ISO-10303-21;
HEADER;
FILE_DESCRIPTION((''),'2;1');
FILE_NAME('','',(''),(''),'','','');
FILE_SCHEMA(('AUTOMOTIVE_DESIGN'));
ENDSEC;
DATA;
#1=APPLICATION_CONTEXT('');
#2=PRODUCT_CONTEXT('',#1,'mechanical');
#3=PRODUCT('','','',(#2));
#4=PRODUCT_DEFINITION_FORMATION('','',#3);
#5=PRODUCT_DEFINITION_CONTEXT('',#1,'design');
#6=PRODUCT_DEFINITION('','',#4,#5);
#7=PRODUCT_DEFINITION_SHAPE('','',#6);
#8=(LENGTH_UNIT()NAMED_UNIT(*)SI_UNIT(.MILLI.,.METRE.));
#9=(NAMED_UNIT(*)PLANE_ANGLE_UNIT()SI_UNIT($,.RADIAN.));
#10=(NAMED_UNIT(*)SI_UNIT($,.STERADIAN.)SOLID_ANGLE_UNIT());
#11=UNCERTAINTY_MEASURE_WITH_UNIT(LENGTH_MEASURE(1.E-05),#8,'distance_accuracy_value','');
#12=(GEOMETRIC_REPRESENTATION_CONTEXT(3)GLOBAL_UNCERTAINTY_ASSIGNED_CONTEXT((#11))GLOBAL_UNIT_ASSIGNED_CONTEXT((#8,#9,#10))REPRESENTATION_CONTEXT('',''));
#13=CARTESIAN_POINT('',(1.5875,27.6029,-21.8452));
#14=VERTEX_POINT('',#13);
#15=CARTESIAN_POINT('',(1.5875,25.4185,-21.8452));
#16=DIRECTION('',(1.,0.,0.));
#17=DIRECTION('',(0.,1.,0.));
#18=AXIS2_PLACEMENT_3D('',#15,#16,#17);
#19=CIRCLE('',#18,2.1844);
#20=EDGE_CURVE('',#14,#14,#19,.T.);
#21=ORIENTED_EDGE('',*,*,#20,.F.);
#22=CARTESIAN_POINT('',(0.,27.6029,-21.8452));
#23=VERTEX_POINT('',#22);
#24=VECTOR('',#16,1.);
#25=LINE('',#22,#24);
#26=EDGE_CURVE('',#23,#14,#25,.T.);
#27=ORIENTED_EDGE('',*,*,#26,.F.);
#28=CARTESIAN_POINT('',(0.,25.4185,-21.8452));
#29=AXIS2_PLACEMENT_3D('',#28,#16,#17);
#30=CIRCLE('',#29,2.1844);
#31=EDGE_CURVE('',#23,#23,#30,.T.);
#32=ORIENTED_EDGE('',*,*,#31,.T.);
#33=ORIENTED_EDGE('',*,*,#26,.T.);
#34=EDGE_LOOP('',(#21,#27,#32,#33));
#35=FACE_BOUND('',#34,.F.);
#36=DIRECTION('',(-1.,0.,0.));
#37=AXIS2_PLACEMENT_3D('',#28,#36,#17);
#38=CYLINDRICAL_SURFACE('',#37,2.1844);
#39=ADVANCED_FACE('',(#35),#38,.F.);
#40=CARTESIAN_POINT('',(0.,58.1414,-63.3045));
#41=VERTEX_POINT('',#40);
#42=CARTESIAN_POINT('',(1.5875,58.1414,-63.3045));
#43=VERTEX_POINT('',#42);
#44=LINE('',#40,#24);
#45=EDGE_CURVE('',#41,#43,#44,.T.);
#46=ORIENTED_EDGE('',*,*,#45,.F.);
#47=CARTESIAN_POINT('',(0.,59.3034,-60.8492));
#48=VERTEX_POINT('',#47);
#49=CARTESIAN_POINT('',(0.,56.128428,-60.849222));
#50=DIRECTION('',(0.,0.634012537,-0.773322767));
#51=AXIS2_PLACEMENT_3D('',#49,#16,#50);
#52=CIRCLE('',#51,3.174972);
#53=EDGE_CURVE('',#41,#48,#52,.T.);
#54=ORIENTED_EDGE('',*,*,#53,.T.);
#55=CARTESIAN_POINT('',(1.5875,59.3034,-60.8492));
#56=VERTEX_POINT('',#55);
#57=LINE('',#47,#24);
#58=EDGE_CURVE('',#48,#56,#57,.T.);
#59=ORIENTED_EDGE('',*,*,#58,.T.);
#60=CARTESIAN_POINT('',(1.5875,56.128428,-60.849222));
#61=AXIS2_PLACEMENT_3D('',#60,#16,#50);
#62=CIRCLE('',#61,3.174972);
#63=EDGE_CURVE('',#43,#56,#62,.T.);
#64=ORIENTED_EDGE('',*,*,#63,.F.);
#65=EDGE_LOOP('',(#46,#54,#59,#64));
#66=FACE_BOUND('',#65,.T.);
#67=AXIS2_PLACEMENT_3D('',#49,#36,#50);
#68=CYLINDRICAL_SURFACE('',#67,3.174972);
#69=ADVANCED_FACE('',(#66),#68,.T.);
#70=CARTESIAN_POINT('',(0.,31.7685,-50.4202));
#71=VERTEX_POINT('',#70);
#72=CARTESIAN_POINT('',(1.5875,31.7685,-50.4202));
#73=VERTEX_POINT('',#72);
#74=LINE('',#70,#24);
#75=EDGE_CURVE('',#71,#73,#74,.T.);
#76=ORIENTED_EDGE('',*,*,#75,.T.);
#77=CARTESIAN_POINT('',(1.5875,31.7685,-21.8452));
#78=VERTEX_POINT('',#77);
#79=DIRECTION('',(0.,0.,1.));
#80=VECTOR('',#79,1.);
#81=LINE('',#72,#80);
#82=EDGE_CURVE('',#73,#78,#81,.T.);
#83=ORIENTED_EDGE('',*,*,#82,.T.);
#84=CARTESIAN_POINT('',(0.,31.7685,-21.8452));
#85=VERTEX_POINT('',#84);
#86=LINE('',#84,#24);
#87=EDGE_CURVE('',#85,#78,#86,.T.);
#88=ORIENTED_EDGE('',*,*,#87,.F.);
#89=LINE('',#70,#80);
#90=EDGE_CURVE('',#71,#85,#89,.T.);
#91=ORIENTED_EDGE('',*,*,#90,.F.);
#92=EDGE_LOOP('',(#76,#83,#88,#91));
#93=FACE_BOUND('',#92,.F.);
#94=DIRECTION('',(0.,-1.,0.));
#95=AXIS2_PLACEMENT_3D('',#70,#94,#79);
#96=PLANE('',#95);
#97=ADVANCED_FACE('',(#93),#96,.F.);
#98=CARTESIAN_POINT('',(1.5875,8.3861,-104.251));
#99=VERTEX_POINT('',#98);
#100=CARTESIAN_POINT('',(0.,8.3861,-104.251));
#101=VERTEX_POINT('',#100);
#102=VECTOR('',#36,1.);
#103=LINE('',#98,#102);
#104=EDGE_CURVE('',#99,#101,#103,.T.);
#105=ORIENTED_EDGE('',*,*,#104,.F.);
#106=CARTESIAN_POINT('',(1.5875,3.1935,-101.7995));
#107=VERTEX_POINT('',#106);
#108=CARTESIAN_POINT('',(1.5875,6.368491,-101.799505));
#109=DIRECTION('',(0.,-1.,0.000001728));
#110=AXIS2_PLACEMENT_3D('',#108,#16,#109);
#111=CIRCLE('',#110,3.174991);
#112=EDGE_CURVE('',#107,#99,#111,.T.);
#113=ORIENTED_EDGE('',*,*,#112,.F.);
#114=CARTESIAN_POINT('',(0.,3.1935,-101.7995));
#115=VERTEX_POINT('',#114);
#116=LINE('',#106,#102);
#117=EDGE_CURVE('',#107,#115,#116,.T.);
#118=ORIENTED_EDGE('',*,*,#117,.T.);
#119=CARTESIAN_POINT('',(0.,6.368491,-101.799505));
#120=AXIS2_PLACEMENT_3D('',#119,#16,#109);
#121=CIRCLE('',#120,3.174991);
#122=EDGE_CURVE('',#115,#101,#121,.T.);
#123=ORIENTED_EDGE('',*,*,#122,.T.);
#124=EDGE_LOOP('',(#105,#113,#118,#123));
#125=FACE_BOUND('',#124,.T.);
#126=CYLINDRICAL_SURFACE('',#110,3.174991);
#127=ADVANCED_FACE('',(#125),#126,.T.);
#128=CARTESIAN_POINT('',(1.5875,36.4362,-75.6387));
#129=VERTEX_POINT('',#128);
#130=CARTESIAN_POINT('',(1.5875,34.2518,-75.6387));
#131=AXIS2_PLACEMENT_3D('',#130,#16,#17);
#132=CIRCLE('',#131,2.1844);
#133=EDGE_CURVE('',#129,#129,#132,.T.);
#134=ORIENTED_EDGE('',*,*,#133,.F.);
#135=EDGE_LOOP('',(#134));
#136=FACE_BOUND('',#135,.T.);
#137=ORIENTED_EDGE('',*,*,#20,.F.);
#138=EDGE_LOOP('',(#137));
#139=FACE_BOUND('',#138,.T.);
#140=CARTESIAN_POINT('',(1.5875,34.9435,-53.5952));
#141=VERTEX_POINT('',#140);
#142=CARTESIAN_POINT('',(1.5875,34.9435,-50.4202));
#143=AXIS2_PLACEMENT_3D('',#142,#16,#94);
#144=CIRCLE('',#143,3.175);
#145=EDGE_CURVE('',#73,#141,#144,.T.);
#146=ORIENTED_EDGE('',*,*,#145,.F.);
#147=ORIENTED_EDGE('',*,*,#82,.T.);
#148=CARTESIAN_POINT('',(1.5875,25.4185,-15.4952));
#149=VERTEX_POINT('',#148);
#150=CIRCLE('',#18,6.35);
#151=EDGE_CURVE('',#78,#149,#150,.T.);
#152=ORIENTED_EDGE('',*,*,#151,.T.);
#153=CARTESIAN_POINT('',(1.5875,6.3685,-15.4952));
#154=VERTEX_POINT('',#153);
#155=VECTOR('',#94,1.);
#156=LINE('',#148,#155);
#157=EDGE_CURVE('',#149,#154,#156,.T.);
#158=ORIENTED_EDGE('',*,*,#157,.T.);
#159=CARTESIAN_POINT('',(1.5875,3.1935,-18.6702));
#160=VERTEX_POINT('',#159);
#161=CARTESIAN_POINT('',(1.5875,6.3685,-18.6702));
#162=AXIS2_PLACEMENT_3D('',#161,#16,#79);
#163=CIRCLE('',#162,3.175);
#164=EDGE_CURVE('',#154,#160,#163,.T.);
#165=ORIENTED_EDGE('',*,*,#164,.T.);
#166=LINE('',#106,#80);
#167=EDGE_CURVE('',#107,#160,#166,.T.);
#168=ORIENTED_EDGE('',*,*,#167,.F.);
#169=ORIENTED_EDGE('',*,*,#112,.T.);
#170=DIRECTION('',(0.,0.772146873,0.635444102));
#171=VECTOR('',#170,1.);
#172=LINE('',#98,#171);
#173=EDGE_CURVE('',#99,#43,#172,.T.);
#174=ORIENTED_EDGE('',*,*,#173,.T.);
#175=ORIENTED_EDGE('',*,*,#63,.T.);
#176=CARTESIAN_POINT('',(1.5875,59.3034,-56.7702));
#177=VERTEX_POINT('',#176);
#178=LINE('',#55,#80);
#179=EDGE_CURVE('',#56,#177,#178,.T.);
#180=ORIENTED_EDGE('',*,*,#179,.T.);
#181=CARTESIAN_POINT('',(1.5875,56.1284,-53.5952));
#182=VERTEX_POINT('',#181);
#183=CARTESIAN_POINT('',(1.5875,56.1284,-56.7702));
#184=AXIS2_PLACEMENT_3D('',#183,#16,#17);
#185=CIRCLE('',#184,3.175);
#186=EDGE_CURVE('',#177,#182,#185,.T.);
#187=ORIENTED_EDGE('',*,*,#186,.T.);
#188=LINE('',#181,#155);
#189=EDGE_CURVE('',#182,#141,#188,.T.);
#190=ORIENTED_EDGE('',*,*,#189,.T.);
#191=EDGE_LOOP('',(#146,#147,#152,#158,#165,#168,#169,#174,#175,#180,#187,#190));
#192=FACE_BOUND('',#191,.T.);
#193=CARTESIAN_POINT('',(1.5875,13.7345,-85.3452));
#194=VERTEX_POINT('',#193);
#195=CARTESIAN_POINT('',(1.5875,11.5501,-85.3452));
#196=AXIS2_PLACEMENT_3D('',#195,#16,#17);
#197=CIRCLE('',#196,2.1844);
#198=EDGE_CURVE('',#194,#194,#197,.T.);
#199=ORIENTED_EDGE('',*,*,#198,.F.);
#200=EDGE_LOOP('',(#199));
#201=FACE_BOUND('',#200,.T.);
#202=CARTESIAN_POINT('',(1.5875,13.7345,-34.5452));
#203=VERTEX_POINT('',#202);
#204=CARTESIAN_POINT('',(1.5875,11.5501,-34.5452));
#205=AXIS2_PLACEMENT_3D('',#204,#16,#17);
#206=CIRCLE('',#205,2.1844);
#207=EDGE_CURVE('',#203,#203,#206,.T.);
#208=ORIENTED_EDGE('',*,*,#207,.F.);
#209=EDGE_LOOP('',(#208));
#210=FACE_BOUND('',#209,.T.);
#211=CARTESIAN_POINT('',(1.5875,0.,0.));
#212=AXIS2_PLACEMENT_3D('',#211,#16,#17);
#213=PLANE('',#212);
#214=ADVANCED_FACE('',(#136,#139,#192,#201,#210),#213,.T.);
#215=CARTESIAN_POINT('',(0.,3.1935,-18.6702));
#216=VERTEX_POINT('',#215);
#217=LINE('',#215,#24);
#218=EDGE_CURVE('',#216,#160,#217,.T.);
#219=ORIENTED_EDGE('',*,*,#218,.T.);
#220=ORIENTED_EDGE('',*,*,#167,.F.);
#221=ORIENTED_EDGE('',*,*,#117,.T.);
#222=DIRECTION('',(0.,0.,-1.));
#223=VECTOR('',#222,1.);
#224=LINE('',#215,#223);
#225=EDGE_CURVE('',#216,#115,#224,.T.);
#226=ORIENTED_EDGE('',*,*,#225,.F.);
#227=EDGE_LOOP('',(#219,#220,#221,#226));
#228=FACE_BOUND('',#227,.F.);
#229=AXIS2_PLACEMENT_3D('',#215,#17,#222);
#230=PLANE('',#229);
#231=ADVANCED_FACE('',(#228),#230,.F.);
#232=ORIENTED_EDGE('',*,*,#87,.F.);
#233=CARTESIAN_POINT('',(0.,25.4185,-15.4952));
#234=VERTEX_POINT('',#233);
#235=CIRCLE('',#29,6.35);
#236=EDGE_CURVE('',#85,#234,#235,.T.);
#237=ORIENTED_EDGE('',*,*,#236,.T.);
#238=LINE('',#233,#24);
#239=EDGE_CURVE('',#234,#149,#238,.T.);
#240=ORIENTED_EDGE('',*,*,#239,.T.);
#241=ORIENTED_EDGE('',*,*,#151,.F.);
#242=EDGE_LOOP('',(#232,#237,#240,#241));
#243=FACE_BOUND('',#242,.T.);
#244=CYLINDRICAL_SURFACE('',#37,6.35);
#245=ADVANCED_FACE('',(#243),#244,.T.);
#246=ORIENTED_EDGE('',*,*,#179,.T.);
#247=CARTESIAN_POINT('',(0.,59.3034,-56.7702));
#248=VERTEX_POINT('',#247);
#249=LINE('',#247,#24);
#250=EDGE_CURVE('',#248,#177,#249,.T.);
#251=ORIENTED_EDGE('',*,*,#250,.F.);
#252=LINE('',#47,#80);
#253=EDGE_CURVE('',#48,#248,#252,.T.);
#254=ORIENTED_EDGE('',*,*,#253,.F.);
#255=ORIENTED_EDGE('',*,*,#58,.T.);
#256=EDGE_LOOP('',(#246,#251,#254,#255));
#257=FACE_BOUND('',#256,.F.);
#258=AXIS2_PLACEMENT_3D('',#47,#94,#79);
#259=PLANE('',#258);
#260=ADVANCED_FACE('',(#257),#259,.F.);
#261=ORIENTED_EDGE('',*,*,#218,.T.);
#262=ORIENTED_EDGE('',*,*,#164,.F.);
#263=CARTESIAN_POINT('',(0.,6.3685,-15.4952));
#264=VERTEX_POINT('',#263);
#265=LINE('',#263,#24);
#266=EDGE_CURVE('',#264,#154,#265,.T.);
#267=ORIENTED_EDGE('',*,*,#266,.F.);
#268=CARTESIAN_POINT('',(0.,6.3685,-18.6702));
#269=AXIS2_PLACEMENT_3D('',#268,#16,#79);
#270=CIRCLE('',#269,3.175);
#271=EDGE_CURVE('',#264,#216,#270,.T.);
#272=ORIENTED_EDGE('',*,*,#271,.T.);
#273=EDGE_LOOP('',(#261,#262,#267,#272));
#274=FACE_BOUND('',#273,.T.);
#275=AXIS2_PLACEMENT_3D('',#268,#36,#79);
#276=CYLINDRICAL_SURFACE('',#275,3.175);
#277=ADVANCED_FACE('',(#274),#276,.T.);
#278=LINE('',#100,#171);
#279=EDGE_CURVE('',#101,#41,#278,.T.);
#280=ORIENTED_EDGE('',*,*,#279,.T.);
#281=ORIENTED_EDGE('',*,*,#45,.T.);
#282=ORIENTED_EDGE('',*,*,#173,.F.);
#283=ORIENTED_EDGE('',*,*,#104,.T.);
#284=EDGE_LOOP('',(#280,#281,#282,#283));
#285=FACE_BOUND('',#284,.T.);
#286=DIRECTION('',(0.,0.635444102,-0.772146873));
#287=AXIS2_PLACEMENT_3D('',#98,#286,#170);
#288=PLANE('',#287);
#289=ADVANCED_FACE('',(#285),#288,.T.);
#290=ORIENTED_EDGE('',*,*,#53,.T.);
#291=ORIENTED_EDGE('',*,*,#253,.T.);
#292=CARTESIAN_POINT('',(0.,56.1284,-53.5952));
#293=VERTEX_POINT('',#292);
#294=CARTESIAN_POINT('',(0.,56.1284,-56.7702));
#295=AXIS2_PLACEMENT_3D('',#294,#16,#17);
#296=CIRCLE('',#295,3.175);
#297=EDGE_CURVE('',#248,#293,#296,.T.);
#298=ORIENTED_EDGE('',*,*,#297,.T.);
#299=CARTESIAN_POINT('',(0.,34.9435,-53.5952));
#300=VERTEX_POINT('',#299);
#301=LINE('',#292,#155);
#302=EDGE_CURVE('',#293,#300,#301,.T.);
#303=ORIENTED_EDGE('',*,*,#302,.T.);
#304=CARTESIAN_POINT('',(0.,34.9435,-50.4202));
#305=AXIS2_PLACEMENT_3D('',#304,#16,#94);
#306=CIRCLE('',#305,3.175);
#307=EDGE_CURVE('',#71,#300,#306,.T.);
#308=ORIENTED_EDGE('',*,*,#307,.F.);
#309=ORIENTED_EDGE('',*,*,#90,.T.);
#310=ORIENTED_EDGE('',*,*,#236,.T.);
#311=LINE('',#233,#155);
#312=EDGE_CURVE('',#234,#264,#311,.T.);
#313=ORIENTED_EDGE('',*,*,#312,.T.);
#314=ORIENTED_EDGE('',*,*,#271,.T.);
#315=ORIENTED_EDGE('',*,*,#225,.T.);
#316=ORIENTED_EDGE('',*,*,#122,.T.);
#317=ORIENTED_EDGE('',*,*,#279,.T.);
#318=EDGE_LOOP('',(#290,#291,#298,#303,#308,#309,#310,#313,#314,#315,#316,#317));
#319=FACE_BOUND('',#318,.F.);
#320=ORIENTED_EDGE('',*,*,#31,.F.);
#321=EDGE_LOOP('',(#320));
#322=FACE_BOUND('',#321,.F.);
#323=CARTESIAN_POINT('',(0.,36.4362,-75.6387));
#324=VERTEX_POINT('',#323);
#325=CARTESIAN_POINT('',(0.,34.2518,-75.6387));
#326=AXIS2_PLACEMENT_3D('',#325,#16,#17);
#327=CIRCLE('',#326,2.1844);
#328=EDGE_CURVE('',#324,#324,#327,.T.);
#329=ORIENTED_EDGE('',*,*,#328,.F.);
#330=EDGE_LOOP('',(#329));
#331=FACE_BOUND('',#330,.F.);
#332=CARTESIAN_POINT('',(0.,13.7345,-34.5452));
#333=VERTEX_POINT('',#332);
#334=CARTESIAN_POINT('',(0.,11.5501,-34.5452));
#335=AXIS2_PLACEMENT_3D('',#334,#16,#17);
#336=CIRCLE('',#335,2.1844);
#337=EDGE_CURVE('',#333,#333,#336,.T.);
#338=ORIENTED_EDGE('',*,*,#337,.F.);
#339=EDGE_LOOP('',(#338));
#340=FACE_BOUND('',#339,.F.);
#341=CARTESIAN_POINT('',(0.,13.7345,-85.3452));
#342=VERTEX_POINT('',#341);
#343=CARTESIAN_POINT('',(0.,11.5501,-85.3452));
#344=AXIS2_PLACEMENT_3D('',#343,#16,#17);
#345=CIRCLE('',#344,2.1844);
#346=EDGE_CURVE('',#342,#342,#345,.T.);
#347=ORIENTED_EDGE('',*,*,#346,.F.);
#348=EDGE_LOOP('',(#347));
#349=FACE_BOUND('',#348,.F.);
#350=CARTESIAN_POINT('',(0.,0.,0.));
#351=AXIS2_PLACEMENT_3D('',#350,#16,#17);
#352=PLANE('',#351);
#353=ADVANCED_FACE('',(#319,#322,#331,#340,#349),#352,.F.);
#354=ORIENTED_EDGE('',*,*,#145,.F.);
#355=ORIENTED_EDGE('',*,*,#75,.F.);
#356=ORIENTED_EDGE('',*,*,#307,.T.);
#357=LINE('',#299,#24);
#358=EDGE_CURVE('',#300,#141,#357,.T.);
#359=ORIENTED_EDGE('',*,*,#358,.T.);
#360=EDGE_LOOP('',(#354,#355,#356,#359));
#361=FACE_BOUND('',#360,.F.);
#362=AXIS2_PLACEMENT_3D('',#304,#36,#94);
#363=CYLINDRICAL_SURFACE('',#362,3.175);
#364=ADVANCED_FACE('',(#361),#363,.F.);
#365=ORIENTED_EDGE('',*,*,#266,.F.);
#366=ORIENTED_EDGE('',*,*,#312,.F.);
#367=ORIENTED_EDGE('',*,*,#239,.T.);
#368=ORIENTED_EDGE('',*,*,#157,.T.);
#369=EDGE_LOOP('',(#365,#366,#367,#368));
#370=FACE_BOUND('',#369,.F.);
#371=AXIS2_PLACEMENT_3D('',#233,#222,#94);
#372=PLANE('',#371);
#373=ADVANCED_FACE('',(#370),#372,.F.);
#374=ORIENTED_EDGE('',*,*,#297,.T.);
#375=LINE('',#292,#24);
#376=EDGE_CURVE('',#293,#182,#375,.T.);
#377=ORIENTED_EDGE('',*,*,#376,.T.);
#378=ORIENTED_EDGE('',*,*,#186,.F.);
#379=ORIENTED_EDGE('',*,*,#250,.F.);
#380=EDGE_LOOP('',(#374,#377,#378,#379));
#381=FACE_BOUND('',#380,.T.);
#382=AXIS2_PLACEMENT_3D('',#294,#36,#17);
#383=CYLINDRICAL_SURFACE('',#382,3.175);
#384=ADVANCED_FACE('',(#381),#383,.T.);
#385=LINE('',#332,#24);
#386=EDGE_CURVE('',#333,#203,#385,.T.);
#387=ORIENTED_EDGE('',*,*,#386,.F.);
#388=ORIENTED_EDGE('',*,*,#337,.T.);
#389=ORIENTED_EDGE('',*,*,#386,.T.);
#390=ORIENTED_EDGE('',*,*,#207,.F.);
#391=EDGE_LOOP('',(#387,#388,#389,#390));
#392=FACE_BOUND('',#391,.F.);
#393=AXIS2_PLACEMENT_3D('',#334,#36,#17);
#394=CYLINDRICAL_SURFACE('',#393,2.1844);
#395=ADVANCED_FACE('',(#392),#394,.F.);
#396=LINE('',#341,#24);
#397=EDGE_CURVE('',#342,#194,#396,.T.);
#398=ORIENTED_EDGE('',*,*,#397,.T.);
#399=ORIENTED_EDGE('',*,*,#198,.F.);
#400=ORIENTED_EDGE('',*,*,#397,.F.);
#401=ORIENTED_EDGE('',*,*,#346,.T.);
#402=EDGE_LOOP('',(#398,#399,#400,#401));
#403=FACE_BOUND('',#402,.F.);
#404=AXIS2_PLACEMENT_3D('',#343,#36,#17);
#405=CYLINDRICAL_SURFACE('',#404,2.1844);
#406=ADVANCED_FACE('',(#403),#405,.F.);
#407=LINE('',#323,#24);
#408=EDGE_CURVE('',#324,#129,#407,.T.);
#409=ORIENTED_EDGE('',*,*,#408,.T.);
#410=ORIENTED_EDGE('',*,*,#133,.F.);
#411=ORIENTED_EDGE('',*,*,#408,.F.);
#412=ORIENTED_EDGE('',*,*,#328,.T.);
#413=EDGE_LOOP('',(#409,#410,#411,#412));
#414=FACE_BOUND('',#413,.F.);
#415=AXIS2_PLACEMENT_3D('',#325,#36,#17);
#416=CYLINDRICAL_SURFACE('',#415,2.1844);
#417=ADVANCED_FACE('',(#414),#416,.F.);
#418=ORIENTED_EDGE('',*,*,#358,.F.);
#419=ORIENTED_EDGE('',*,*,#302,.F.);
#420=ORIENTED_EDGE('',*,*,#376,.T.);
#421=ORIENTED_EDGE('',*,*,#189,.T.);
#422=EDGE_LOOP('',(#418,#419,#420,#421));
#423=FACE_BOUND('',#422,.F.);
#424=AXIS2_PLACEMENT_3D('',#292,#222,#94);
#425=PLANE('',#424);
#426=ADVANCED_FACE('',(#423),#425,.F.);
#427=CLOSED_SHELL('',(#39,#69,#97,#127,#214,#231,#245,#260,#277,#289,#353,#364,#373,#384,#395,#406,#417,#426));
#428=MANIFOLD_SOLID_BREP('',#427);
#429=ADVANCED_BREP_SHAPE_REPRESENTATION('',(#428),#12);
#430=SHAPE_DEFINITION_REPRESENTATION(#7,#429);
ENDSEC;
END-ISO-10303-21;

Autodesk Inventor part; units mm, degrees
ref_plane "YZ Plane" through (0, 0, 0) normal (1, 0, 0) x (0, 1, 0)
ref_plane "XZ Plane" through (0, 0, 0) normal (0, 1, 0) x (-1, 0, 0)
ref_plane "XY Plane" through (0, 0, 0) normal (0, 0, 1) x (1, 0, 0)
sketch "Sketch1" plane through (0, 0, 0) normal (1, 0, 0) x (0, 1, 0)
  line L0 (3.1935, -18.6702) -> (3.1935, -95.8243)
  arc A0 (3.1935, -95.8243) -> (7.9971, -98.5498) centre (6.3685, -95.8243) ccw
  arc A1 (7.9971, -98.5498) -> (58.1414, -63.3045) centre (-204.4103, 256.9406) ccw
  arc A2 (58.1414, -63.3045) -> (59.3034, -60.8492) centre (56.1284, -60.8492) ccw
  line L1 (59.3034, -60.8492) -> (59.3034, -56.7702)
  arc A3 (59.3034, -56.7702) -> (56.1284, -53.5952) centre (56.1284, -56.7702) ccw
  line L2 (56.1284, -53.5952) -> (34.9435, -53.5952)
  arc A4 (31.7685, -50.4202) -> (34.9435, -53.5952) centre (34.9435, -50.4202) ccw
  line L3 (31.7685, -50.4202) -> (31.7685, -21.8452)
  arc A5 (31.7685, -21.8452) -> (25.4185, -15.4952) centre (25.4185, -21.8452) ccw
  line L4 (25.4185, -15.4952) -> (6.3685, -15.4952)
  arc A6 (6.3685, -15.4952) -> (3.1935, -18.6702) centre (6.3685, -18.6702) ccw
  circle A7 centre (11.5501, -34.5452) radius 2.1844
  circle A8 centre (11.5501, -85.3452) radius 2.1844
  circle A9 centre (34.2518, -75.6387) radius 2.1844
  circle A10 centre (25.4185, -21.8452) radius 2.1844
  point P0 (0, 0)
  point P1 (25.4185, -15.4952)
  point P2 (3.1935, -18.6702)
  point P3 (7.9971, -98.5498)
  point P4 (58.1414, -63.3045)
  point P5 (34.9435, -53.5952)
sketch "Sketch2" plane through (1.5875, 0, 0) normal (1, 0, 0) x (0, 0, -1)
  line L0 (18.6702, 3.1935) -> (95.8243, 3.1935)
  line L1 (95.8243, 3.1935) -> (101.7995, 3.1935)
  arc A0 (63.3045, 58.1414) -> (60.8492, 59.3034) centre (60.8492, 56.1284) ccw
  line L2 (104.251, 8.3861) -> (63.3045, 58.1414)
  arc A1 (101.7995, 3.1935) -> (104.251, 8.3861) centre (101.7995, 6.3685) ccw
  arc A2 (98.5498, 7.9971) -> (63.3045, 58.1414) centre (-256.9406, -204.4103) ccw
  arc A3 (95.8243, 3.1935) -> (98.5498, 7.9971) centre (95.8243, 6.3685) ccw
  point P0 (0, 0)
  point P1 (108.5243, 3.1935)
  dimension "d1" = 12.7
  dimension "d2" = 3.175
extrude "Plate1" add sketch "Sketch1" along normal blind 1.5875
sheet face with bend "Face2" sketch "Sketch2" thickness 1.5875 toward (-1, 0, 0) bend radius 1.5875
bend "Bend1"
equation "\"d0\" = Thickness"
equation "\"d3\" = BendRadius"
equation "\"d4\" = BendReliefWidth"
equation "\"d6\" = MinimumRemnant"
equation "\"d5\" = BendReliefDepth"
equation "\"d7\" = TransitionRadius"
equation "\"BendRadius\" = Thickness"
equation "\"BendReliefWidth\" = Thickness"
equation "\"BendReliefDepth\" = 0.5 * Thickness"
equation "\"CornerReliefSize\" = 4 * Thickness"
equation "\"MinimumRemnant\" = 2 * Thickness"
equation "\"TransitionRadius\" = BendRadius"
equation "\"JacobiRadiusSize\" = BendRadius"
equation "\"GapSize\" = Thickness"
equation "\"Thickness\" = 1.5875"
properties part number "sledsv3"
